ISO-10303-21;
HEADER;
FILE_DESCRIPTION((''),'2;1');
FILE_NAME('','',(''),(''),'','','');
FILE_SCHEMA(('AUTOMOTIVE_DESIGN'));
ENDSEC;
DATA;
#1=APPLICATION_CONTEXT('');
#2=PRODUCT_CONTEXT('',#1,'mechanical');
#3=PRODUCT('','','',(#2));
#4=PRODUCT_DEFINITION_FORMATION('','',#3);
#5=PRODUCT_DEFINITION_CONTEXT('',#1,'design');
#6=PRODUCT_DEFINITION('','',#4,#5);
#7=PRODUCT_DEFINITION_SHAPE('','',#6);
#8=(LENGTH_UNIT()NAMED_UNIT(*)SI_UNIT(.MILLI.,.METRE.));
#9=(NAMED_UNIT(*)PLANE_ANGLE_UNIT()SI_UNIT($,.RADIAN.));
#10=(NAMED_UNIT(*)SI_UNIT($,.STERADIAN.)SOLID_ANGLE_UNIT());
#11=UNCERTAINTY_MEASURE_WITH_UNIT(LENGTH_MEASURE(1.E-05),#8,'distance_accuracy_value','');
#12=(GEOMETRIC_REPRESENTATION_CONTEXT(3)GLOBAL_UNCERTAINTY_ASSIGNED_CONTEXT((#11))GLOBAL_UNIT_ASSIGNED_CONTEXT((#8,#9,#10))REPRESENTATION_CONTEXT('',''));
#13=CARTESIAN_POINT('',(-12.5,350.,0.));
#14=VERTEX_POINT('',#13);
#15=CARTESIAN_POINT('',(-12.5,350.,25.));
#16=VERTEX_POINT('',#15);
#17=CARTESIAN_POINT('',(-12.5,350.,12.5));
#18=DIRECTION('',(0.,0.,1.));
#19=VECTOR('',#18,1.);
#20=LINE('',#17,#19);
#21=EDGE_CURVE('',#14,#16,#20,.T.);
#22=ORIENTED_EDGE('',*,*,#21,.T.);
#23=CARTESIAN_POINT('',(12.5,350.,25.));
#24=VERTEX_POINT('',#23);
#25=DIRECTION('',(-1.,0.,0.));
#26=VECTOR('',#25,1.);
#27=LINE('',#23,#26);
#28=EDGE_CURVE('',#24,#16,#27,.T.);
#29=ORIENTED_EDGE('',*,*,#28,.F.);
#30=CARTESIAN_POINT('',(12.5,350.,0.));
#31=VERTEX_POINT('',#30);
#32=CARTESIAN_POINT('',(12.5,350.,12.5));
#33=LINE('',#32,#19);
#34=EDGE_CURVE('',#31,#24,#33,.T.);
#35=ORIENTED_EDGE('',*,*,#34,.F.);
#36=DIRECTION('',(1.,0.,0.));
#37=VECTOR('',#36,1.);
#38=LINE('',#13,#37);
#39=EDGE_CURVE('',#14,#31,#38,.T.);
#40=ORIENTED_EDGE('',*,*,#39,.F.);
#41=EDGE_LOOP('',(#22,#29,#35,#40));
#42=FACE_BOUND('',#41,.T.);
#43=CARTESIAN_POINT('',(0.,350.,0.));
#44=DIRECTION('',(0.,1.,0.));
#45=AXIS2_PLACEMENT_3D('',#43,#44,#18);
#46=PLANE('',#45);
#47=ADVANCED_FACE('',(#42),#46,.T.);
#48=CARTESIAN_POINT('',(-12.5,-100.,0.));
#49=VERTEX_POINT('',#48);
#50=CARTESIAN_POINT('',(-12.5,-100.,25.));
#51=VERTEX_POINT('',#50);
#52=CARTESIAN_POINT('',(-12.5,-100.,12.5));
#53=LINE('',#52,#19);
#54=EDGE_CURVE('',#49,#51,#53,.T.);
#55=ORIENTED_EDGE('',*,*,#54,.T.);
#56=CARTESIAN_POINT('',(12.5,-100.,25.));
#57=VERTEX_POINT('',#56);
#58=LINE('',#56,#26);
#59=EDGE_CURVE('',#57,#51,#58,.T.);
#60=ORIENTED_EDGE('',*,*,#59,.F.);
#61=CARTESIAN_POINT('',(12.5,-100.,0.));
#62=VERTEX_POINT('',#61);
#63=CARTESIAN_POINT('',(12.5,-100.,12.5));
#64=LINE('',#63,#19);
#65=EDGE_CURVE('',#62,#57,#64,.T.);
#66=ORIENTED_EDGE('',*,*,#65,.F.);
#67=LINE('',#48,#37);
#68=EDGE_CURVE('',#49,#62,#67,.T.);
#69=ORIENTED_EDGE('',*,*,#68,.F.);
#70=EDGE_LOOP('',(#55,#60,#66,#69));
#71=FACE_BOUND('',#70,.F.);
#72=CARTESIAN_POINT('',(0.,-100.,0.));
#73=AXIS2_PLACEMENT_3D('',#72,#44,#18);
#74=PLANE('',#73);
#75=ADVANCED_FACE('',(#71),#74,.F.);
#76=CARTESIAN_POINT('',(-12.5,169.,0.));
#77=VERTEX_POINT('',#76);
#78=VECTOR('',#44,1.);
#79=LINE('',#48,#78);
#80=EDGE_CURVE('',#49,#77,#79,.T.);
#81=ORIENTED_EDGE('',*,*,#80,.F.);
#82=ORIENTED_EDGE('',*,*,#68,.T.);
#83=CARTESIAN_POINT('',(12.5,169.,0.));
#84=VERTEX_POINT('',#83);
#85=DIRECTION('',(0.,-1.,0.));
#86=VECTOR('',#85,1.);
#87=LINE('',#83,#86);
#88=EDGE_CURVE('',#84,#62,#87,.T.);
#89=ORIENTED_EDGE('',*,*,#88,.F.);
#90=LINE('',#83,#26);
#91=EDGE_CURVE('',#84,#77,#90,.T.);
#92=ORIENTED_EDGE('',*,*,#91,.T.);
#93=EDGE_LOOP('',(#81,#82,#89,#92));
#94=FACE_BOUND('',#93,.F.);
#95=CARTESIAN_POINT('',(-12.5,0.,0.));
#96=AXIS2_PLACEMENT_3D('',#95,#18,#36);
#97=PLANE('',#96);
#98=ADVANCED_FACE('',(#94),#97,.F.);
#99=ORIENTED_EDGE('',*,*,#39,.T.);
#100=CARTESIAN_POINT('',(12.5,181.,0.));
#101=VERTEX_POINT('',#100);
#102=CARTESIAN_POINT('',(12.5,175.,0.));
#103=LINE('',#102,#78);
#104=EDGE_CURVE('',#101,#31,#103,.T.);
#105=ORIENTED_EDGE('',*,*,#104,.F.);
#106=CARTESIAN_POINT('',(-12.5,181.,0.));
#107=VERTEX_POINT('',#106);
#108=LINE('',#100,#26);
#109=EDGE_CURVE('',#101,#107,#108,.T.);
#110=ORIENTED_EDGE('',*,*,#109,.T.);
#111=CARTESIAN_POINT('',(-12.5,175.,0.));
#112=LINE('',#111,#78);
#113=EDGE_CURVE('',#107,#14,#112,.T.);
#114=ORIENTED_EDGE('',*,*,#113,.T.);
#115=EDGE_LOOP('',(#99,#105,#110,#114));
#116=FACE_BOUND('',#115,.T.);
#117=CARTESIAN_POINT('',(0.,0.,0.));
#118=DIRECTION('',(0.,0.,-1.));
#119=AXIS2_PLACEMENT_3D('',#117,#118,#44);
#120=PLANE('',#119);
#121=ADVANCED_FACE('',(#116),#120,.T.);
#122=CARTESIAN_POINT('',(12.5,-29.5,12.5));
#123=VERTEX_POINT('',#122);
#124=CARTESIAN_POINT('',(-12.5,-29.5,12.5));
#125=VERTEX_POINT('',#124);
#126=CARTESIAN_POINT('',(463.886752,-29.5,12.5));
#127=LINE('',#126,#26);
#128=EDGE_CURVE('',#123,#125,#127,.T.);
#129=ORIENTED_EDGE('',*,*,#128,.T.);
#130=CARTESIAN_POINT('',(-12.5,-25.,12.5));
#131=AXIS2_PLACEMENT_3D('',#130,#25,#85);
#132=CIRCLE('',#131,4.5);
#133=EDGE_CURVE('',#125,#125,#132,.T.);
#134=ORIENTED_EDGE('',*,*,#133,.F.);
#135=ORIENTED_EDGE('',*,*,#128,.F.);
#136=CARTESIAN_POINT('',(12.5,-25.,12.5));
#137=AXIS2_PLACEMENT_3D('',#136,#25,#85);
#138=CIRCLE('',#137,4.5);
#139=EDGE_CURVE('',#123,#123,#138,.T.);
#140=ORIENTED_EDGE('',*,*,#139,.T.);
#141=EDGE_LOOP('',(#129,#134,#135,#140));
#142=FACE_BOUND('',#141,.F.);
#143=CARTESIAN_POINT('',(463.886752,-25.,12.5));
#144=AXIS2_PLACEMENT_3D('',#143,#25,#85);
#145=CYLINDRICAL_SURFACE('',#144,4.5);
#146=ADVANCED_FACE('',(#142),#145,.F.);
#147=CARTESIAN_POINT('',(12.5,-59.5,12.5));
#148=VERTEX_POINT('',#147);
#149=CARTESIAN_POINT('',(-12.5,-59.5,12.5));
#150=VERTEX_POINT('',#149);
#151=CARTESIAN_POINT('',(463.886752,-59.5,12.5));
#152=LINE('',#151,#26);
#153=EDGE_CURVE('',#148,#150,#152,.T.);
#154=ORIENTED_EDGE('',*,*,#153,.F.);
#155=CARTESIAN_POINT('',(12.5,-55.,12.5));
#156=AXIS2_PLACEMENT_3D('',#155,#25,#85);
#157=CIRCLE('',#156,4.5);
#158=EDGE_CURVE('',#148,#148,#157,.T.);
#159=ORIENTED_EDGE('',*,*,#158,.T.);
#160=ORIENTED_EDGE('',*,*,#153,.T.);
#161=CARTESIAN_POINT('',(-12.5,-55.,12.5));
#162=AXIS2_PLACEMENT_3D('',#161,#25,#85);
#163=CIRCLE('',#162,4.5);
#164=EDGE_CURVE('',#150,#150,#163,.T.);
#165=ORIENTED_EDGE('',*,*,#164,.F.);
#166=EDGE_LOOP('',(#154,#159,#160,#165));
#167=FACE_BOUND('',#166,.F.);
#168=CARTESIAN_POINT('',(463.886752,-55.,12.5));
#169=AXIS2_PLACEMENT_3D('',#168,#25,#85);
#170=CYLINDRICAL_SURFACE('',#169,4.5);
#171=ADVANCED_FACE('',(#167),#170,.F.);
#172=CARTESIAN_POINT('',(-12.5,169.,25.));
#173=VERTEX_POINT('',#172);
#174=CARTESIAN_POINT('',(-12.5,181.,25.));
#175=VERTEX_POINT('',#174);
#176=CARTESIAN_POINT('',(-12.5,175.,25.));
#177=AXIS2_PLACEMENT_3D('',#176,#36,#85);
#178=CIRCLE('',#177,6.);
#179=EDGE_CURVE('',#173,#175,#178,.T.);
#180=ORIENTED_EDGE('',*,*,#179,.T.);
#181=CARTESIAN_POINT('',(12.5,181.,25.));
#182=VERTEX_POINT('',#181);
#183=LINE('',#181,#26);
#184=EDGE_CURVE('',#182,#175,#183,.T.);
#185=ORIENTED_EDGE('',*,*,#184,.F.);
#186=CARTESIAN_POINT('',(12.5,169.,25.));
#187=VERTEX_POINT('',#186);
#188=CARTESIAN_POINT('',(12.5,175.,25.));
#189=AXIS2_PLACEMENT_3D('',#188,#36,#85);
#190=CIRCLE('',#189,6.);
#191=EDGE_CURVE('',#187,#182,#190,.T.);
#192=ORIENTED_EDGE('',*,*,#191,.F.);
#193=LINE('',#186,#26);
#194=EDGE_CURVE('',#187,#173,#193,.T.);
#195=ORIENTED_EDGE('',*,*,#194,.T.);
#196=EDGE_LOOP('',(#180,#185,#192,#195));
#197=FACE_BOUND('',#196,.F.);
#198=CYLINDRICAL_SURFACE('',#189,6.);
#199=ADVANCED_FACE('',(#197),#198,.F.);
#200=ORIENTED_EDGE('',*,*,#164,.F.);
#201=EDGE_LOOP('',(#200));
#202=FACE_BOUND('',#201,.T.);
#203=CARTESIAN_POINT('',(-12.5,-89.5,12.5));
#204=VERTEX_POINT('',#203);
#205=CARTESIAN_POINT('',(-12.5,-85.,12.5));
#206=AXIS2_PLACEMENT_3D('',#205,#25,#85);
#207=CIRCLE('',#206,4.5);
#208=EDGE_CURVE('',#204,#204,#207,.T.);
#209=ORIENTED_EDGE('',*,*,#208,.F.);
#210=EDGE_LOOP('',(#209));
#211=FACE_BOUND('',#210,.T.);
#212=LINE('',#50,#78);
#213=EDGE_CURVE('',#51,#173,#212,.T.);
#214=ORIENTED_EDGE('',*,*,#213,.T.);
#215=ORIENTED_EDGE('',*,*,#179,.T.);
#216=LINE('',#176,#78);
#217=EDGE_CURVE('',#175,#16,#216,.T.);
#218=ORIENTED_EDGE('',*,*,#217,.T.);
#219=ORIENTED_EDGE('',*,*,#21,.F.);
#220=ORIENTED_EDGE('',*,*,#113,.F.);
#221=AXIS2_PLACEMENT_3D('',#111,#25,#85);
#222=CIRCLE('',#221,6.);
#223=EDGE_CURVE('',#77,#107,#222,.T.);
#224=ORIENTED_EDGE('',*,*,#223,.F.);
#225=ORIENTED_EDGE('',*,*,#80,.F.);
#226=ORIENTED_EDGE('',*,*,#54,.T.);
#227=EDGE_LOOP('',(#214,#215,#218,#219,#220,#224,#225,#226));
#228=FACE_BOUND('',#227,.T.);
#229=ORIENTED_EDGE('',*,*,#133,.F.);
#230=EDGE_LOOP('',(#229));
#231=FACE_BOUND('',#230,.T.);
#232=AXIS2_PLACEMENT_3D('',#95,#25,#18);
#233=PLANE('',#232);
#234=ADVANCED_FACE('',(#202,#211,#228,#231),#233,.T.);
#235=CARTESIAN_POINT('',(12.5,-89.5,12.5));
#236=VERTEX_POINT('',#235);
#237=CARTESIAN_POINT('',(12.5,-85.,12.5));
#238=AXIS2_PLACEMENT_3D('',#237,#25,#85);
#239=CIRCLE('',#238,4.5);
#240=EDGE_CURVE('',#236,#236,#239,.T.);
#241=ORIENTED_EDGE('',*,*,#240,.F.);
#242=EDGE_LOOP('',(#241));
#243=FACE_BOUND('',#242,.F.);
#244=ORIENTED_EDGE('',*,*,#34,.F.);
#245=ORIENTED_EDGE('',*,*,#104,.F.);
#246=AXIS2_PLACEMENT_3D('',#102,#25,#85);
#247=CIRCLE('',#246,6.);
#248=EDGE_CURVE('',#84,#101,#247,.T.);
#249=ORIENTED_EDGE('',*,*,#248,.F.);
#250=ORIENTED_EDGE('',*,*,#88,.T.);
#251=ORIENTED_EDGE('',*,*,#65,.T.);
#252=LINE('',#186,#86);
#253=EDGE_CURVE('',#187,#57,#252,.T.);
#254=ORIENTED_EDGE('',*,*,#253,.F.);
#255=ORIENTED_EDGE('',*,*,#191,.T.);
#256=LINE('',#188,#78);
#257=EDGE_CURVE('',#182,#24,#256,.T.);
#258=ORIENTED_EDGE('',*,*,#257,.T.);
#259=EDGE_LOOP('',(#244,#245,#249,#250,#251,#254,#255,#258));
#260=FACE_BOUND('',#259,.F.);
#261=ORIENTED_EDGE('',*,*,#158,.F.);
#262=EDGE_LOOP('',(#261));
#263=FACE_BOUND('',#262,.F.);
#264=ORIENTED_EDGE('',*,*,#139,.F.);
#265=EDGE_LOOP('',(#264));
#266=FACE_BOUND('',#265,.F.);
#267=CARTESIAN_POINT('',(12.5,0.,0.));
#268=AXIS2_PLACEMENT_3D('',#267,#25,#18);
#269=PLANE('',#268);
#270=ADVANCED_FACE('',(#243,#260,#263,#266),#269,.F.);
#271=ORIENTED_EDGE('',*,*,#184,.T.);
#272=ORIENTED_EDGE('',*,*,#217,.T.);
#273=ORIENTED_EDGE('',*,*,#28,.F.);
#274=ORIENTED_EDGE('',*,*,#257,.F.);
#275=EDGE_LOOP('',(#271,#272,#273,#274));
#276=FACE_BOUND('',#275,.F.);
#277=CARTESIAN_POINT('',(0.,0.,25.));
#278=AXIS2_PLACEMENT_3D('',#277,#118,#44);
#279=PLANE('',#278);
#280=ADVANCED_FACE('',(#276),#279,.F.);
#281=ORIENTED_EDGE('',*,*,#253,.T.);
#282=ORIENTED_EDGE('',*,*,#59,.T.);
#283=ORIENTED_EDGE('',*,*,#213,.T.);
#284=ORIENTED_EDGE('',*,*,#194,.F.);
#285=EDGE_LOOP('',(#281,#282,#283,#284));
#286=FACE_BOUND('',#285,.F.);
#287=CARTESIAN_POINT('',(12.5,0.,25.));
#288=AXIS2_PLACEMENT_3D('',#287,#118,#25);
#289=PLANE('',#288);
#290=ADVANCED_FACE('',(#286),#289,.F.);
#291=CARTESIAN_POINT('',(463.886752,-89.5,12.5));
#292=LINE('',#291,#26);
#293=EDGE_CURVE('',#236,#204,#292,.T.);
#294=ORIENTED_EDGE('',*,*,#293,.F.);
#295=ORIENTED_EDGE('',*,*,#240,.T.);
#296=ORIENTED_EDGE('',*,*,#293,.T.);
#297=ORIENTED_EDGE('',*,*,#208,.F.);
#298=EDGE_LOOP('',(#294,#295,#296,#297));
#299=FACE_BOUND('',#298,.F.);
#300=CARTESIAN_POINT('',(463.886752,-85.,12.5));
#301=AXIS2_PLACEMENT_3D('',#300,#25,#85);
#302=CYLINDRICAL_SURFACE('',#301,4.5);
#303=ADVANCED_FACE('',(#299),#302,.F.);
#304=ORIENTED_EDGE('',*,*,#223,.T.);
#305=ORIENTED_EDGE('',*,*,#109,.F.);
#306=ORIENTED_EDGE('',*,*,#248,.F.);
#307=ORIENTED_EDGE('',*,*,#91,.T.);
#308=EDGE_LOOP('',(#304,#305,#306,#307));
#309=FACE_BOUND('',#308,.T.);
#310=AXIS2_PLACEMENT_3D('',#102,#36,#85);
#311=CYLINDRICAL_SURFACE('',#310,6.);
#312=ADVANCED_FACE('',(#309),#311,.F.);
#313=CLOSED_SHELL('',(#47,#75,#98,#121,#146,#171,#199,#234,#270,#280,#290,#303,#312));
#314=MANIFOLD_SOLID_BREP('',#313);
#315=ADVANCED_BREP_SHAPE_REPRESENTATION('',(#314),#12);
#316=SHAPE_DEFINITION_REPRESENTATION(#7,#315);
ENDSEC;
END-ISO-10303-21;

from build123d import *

# Parameters (mm, degrees)
F0_W          = 350
F0_H          = 25
F1_DEPTH      = 12.5
F1_DEPTH_BACK = 12.5
F3_DEPTH      = 25
F5_DEPTH      = 100
F7_D          = 9


# Not quite as in the source:
# - a pattern or mirror of a feature is missing from the dataset's text; its kind, count and spacing are read off the source's solid


with BuildPart() as f1:
    # F0 (on Right) → F1 (new body, two sides)
    with BuildSketch(Plane.YZ) as f1_sk:
        with Locations((175, 12.5)):
            Rectangle(F0_W, F0_H)
    extrude(amount=F1_DEPTH)
    extrude(f1_sk.sketch, amount=-F1_DEPTH_BACK)

    # F2 (on face) → F3 (cut)
    with BuildSketch(Plane.YZ.offset(12.5)):
        with BuildLine():
            ThreePointArc((169, 25), (175, 19), (181, 25))
            Line((181, 25), (169, 25))
        make_face()
    f3 = extrude(amount=-F3_DEPTH, mode=Mode.SUBTRACT)

    # F3_copies: F3 across plane
    add(f3.mirror(Plane(origin=(0, 0, 12.5), x_dir=(-1, 0, 0), z_dir=(0, 0, -1))), mode=Mode.SUBTRACT)

    # F5 (add): a face of the model
    f5_faces = [f1.faces().sort_by_distance(p)[0] for p in [
        (0, 0, 12.5),
    ]]
    extrude(f5_faces, amount=F5_DEPTH)

    # F7 (through all)
    with Locations(Plane.YZ.offset(12.5)):
        with Locations((-85, 12.5), (-55, 12.5), (-25, 12.5)):
            Hole(F7_D / 2)


solid = f1.part
